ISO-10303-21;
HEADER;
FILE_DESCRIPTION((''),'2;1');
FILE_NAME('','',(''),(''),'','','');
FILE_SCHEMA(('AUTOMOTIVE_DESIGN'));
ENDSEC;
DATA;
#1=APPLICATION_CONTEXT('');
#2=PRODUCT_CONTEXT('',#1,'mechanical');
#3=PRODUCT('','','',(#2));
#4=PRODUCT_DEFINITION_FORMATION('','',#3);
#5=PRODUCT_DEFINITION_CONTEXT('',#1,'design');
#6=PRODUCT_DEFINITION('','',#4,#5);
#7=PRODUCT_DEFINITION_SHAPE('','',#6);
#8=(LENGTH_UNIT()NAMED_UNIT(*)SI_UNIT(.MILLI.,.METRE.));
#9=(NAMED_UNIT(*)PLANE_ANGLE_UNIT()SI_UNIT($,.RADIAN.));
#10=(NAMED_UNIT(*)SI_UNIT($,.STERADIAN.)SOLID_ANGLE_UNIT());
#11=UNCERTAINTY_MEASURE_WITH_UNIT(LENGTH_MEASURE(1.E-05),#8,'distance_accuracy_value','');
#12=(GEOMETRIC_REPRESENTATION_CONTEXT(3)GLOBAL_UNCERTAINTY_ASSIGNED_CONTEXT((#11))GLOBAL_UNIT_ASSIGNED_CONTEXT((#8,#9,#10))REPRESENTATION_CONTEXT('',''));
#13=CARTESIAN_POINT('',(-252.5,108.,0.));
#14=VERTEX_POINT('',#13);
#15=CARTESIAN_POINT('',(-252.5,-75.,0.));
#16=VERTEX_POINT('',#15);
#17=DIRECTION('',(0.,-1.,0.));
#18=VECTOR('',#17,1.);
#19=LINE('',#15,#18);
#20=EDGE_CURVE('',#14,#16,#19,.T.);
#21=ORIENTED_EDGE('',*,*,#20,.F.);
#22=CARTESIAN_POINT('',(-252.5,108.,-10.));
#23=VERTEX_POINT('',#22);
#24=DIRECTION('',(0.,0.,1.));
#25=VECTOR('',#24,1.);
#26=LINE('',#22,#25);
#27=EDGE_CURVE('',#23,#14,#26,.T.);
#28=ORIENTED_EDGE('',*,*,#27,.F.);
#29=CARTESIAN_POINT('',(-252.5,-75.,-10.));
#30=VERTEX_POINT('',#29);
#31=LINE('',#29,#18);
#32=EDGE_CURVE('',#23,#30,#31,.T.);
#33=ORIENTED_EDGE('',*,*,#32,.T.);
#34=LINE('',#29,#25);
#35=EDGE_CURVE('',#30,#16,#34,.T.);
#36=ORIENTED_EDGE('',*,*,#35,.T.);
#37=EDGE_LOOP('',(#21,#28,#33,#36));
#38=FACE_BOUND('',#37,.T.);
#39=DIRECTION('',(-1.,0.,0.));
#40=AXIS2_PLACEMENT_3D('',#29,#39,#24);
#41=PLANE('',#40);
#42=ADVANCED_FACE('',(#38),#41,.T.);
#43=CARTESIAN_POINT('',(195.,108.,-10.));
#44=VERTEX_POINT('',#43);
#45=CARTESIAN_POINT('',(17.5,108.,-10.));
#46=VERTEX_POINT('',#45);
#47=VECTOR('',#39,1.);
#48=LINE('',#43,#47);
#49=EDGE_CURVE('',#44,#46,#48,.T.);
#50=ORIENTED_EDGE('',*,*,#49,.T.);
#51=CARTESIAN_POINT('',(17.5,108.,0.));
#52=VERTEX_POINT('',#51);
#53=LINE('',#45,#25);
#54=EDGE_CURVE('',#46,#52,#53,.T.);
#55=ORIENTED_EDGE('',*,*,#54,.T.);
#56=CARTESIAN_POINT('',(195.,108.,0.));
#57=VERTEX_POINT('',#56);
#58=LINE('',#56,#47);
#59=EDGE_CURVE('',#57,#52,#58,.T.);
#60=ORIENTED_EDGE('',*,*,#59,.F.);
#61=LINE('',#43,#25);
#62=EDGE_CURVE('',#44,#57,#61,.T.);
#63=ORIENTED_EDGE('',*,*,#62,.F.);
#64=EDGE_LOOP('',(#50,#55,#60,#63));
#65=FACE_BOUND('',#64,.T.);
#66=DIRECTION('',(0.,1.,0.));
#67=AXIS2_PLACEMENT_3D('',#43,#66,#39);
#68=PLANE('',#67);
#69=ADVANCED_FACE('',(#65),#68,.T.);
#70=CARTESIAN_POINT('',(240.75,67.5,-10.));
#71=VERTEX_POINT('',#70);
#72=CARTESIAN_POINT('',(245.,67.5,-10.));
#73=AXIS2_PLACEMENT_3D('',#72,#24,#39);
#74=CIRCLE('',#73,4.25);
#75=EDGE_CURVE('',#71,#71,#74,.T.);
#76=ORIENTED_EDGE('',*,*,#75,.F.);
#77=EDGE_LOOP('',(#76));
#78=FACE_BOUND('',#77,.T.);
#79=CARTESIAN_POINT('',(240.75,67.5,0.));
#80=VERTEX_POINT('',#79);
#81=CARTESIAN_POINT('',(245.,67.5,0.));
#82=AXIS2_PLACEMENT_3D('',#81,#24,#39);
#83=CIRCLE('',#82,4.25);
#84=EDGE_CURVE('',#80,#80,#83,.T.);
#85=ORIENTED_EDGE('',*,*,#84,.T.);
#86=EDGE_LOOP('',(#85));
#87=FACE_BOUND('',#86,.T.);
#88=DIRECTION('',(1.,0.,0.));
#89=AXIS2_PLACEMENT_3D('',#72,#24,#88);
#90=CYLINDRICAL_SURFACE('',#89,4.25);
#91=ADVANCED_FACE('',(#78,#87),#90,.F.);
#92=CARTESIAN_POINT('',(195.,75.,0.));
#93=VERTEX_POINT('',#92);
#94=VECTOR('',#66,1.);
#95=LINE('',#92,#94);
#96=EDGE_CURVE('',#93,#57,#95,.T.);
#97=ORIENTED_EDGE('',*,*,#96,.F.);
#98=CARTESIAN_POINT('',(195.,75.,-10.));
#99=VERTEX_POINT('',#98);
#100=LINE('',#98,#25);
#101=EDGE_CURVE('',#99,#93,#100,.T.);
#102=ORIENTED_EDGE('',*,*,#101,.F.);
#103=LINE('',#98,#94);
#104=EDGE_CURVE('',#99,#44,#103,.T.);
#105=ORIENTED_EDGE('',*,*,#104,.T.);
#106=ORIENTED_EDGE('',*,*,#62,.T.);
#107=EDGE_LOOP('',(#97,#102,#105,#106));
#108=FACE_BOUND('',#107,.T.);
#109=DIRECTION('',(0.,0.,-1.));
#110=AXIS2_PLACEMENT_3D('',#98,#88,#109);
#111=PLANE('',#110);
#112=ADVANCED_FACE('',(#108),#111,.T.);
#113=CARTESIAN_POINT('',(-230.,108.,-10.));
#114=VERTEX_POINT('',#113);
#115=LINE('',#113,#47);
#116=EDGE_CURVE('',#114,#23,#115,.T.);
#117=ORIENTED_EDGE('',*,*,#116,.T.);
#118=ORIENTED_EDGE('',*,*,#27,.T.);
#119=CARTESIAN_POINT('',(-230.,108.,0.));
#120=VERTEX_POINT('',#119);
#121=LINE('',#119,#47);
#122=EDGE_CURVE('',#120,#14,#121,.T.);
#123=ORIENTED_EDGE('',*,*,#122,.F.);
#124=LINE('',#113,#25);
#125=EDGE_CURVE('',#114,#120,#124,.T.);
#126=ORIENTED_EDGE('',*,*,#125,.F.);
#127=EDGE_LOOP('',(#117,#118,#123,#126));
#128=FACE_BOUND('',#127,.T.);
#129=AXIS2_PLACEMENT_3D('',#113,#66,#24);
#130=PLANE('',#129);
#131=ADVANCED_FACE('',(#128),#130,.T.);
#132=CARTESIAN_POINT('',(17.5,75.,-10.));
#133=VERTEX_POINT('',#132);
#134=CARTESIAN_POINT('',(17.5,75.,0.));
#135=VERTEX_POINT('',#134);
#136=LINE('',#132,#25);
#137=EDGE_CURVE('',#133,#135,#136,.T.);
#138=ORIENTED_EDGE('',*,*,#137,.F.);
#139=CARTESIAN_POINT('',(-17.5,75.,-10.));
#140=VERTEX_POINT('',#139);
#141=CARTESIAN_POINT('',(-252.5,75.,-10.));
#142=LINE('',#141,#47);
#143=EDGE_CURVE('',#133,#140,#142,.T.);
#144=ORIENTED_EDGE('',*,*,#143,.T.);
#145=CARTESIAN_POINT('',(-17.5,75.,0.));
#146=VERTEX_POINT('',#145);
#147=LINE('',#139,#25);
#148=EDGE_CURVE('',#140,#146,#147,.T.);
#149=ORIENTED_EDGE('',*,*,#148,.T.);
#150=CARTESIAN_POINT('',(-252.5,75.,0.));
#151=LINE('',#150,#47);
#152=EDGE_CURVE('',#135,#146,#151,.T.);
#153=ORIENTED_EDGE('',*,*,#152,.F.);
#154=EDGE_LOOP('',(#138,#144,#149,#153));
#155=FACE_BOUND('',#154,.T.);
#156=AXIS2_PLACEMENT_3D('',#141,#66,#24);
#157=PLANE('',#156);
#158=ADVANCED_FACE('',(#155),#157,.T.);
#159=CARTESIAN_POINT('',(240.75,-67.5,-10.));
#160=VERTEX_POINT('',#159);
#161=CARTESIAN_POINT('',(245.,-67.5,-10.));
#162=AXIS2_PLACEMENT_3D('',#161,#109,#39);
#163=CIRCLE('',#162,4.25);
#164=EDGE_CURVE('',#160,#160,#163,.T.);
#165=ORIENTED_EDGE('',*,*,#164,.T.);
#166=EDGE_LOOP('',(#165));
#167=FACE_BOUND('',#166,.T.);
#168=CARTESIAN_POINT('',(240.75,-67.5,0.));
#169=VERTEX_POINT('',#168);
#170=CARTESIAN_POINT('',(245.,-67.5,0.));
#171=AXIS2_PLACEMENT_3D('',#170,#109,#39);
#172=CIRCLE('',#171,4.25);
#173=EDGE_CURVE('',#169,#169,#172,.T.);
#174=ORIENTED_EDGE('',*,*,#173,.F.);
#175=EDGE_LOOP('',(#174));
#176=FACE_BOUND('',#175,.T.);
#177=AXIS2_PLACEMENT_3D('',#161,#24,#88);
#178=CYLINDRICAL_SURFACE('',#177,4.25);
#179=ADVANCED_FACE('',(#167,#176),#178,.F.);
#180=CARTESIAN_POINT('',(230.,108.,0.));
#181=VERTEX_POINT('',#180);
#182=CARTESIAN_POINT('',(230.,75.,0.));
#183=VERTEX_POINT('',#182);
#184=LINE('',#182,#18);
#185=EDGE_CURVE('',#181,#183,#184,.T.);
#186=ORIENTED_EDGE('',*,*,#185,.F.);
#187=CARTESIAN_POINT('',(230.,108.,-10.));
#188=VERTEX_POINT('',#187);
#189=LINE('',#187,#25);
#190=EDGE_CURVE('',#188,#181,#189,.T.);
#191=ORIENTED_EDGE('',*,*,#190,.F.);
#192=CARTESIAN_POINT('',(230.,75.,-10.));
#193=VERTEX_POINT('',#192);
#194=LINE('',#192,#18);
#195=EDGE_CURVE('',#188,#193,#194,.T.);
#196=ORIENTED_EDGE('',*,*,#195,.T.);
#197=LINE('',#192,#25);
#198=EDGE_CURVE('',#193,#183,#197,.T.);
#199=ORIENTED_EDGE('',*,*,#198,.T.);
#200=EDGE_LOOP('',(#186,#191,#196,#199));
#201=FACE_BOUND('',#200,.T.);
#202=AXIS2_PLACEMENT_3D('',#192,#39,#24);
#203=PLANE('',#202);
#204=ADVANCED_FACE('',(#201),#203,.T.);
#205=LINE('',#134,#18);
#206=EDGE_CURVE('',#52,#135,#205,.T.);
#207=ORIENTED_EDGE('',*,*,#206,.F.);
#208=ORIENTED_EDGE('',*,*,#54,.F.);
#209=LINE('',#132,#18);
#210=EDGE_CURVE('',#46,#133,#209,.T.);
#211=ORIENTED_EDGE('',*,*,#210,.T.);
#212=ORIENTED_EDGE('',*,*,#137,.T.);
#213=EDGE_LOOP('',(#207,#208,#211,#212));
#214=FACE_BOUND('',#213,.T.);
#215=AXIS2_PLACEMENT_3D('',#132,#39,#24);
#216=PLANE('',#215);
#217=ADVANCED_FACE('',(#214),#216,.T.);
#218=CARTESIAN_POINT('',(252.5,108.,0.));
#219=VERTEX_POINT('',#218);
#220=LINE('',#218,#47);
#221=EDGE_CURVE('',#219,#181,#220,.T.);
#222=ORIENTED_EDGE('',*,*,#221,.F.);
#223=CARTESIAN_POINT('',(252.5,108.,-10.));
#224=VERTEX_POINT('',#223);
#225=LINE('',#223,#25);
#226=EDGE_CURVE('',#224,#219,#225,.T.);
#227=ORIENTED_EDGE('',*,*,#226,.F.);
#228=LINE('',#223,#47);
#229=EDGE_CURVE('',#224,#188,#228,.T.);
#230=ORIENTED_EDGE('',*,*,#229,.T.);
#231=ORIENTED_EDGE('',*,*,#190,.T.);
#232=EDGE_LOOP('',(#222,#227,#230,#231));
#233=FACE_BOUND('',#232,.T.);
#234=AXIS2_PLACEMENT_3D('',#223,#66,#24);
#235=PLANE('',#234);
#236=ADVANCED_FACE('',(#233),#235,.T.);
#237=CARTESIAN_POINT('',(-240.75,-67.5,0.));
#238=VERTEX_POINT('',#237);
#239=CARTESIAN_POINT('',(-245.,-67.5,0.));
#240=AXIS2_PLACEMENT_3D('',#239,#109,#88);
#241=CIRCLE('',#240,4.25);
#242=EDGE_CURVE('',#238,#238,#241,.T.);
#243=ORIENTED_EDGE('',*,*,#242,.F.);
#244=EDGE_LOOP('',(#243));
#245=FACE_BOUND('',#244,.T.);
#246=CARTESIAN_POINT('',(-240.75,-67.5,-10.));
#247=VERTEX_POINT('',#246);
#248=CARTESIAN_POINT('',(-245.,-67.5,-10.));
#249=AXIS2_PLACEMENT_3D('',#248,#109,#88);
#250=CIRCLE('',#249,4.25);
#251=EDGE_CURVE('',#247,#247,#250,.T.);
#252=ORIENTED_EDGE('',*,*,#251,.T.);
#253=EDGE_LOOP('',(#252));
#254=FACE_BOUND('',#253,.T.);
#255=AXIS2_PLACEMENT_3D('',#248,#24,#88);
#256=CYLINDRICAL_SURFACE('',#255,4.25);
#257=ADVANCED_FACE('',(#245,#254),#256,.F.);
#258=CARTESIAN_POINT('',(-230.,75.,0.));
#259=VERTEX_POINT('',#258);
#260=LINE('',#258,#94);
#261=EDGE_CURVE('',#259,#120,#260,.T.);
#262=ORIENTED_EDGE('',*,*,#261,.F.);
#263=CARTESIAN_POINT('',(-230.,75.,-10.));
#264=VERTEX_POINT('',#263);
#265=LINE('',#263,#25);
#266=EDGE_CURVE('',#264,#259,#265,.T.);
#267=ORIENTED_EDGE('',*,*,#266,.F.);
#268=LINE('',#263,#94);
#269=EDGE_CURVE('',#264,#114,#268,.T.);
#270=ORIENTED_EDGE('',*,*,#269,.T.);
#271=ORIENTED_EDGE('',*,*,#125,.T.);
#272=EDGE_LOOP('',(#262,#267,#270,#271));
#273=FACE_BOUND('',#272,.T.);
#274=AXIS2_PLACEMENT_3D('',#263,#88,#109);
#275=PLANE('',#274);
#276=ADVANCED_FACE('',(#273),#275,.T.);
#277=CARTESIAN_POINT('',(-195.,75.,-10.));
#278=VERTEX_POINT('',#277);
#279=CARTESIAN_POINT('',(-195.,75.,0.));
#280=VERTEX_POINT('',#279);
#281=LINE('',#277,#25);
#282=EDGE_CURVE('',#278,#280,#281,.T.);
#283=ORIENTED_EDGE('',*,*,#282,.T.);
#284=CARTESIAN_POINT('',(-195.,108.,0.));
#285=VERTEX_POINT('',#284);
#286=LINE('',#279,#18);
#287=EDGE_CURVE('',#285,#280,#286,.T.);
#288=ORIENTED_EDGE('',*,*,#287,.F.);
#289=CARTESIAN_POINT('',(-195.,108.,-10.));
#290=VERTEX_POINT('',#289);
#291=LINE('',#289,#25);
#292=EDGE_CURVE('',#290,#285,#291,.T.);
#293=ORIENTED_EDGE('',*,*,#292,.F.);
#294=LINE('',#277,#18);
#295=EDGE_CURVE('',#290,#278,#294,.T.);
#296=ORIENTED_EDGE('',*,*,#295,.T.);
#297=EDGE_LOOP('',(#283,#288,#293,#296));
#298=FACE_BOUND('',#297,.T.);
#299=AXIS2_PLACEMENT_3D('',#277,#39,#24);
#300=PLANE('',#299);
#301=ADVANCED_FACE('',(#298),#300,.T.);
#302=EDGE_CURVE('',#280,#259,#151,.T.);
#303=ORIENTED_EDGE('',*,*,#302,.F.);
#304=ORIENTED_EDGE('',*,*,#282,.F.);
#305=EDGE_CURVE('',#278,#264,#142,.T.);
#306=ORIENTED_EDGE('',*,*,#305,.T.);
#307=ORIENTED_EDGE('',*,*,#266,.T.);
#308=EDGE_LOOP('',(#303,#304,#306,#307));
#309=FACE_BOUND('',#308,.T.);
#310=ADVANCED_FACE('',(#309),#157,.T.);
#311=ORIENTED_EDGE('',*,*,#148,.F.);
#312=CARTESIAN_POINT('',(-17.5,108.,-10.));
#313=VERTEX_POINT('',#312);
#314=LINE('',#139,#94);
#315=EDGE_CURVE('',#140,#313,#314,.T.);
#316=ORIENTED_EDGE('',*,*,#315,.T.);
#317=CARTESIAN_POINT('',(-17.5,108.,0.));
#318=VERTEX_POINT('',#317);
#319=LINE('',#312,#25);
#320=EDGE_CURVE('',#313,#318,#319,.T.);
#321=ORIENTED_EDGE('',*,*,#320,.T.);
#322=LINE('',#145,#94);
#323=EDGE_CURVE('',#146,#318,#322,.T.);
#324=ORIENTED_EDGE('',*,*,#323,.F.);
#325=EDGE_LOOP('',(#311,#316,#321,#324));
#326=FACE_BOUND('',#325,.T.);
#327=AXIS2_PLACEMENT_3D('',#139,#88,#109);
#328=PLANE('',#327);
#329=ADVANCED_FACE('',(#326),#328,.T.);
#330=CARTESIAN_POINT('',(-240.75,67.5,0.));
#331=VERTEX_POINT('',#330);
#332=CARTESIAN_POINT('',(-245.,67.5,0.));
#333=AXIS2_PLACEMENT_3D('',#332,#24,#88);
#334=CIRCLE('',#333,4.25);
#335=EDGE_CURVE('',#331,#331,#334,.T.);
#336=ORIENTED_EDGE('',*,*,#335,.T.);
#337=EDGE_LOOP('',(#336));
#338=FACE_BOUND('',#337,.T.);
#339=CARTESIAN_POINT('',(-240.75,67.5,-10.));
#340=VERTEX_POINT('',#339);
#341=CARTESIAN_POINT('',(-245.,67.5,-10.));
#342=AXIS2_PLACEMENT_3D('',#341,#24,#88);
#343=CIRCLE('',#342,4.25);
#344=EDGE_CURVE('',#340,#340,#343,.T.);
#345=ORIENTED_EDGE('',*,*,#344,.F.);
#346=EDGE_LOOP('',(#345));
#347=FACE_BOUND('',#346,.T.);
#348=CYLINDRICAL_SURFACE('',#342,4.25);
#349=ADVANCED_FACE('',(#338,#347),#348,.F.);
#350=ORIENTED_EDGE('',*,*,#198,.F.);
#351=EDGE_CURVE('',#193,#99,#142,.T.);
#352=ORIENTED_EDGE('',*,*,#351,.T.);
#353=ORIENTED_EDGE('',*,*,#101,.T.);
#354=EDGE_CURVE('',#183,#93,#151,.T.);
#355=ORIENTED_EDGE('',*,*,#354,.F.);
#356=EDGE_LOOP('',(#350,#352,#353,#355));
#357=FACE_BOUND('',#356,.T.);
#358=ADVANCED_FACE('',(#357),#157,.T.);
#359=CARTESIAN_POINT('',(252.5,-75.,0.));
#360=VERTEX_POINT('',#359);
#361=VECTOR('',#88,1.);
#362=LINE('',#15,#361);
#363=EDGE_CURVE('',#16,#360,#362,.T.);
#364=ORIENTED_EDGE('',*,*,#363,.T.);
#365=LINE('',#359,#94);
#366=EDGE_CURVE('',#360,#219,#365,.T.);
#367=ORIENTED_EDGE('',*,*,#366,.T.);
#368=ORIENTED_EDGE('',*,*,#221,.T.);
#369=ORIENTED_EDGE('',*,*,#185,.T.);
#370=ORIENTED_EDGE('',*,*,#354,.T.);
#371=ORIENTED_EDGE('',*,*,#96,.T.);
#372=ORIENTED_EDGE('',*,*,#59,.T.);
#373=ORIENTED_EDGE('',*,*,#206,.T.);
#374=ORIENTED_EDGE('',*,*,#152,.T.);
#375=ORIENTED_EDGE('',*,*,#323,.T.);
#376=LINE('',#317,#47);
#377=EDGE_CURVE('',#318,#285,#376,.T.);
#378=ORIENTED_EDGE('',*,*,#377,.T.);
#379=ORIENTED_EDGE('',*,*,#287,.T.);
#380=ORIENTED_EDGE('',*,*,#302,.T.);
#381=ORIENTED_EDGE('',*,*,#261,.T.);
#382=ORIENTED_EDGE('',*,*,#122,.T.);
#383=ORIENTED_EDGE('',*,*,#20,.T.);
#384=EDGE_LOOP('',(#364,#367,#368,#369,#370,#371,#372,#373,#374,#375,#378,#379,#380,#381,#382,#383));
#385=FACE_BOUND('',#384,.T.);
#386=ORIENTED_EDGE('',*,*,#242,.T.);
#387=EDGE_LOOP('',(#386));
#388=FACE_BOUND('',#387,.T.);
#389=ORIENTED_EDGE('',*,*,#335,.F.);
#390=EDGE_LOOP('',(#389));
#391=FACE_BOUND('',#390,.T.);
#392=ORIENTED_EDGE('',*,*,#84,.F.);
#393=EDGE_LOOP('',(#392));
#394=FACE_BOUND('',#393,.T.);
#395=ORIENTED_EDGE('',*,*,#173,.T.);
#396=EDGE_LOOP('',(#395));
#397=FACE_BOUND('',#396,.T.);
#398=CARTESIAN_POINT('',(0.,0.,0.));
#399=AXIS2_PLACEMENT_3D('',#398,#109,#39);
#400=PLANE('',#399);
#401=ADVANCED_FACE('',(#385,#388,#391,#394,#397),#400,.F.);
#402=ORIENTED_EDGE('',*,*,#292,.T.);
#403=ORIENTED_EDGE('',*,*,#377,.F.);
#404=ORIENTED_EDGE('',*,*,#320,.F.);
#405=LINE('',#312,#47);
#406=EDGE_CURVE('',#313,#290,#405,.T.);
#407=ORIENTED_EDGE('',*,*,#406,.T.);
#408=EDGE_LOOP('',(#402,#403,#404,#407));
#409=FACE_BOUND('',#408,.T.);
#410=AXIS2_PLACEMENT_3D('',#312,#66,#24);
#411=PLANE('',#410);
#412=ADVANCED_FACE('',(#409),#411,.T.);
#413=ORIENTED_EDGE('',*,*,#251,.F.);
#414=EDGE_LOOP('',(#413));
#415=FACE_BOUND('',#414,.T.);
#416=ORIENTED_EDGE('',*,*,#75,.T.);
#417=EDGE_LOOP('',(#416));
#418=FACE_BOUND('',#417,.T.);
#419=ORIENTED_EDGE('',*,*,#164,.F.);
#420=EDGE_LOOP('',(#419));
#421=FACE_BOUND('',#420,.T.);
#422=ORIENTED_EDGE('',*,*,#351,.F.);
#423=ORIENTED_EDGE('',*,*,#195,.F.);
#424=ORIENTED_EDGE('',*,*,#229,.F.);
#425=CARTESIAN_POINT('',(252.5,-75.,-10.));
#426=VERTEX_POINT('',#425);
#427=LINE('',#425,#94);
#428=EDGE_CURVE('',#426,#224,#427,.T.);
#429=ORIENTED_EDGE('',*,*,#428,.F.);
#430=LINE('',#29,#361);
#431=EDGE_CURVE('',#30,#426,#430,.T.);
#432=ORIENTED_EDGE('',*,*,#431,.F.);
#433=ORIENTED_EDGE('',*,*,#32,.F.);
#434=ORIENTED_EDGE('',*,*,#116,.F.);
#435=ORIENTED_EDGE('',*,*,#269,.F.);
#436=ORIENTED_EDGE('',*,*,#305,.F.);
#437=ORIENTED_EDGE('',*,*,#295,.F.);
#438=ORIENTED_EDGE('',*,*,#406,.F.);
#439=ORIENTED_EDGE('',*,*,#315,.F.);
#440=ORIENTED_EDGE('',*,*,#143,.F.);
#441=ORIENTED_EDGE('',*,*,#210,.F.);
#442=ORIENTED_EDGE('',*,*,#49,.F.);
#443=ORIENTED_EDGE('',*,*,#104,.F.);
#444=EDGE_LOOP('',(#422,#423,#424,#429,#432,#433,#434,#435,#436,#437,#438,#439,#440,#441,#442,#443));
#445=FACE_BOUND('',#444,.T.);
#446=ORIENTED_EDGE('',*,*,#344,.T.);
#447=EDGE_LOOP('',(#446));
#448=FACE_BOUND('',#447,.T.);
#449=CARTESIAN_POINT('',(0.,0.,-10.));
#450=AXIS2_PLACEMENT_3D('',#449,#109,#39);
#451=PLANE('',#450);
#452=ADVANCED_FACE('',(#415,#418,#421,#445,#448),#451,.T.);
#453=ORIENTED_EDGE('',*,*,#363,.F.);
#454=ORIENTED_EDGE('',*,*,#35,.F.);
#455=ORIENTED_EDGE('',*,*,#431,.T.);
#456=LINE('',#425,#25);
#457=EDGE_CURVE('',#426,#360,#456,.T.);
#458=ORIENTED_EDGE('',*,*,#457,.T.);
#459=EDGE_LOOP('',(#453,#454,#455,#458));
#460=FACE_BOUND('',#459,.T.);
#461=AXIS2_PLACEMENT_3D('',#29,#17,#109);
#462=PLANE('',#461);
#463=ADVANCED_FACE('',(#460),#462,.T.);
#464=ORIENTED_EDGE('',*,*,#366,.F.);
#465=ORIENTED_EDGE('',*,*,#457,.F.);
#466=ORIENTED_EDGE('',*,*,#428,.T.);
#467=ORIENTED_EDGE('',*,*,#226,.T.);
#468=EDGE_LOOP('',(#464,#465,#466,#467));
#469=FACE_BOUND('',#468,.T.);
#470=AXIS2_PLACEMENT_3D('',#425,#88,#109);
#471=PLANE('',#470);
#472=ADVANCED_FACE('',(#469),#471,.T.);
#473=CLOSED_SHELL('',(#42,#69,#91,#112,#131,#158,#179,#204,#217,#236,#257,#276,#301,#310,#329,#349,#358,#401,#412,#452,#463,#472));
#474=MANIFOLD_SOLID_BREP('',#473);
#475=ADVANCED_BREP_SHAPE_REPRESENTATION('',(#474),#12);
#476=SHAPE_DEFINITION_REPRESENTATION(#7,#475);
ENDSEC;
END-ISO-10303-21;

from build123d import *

# Parameters (mm, degrees)
IZIM1_W               = 505
IZIM1_H               = 150
TABAN_FLAN_1_DEPTH    = 10
IZIM2_R               = 4.25
KES_EKSTR_ZYON1_DEPTH = 10
IZIM3_W               = 22.5
IZIM3_H               = 33
IZIM3_W_2             = 177.5
SEKME1_DEPTH          = 10


# Sheet-metal steps are written as plain solids
with BuildPart() as part:
    # Çizim1 → Taban-Flanş1 (new body)
    with BuildSketch(Plane.XY):
        Rectangle(IZIM1_W, IZIM1_H)
    extrude(amount=-TABAN_FLAN_1_DEPTH)

    # Çizim2 → Kes-Ekstrüzyon1 (cut)
    with BuildSketch(Plane.XY):
        with Locations((-245, 67.5)):
            Circle(IZIM2_R)
        with Locations(Location((245, 67.5, 0), (0, 0, 180))):
            Circle(IZIM2_R)
    kes_ekstr_zyon1 = extrude(amount=-KES_EKSTR_ZYON1_DEPTH, mode=Mode.SUBTRACT)

    # Aynalama1: Kes-Ekstrüzyon1 across plane
    add(kes_ekstr_zyon1.mirror(Plane.ZX), mode=Mode.SUBTRACT)

    # Çizim3 → Sekme1 (add)
    with BuildSketch(Plane.XY):
        with Locations((241.25, 91.5)):
            Rectangle(IZIM3_W, IZIM3_H)
        with Locations((106.25, 91.5)):
            Rectangle(IZIM3_W_2, IZIM3_H)
        with Locations((-106.25, 91.5)):
            Rectangle(IZIM3_W_2, IZIM3_H)
        with Locations((-241.25, 91.5)):
            Rectangle(IZIM3_W, IZIM3_H)
    extrude(amount=-SEKME1_DEPTH)


solid = part.part
